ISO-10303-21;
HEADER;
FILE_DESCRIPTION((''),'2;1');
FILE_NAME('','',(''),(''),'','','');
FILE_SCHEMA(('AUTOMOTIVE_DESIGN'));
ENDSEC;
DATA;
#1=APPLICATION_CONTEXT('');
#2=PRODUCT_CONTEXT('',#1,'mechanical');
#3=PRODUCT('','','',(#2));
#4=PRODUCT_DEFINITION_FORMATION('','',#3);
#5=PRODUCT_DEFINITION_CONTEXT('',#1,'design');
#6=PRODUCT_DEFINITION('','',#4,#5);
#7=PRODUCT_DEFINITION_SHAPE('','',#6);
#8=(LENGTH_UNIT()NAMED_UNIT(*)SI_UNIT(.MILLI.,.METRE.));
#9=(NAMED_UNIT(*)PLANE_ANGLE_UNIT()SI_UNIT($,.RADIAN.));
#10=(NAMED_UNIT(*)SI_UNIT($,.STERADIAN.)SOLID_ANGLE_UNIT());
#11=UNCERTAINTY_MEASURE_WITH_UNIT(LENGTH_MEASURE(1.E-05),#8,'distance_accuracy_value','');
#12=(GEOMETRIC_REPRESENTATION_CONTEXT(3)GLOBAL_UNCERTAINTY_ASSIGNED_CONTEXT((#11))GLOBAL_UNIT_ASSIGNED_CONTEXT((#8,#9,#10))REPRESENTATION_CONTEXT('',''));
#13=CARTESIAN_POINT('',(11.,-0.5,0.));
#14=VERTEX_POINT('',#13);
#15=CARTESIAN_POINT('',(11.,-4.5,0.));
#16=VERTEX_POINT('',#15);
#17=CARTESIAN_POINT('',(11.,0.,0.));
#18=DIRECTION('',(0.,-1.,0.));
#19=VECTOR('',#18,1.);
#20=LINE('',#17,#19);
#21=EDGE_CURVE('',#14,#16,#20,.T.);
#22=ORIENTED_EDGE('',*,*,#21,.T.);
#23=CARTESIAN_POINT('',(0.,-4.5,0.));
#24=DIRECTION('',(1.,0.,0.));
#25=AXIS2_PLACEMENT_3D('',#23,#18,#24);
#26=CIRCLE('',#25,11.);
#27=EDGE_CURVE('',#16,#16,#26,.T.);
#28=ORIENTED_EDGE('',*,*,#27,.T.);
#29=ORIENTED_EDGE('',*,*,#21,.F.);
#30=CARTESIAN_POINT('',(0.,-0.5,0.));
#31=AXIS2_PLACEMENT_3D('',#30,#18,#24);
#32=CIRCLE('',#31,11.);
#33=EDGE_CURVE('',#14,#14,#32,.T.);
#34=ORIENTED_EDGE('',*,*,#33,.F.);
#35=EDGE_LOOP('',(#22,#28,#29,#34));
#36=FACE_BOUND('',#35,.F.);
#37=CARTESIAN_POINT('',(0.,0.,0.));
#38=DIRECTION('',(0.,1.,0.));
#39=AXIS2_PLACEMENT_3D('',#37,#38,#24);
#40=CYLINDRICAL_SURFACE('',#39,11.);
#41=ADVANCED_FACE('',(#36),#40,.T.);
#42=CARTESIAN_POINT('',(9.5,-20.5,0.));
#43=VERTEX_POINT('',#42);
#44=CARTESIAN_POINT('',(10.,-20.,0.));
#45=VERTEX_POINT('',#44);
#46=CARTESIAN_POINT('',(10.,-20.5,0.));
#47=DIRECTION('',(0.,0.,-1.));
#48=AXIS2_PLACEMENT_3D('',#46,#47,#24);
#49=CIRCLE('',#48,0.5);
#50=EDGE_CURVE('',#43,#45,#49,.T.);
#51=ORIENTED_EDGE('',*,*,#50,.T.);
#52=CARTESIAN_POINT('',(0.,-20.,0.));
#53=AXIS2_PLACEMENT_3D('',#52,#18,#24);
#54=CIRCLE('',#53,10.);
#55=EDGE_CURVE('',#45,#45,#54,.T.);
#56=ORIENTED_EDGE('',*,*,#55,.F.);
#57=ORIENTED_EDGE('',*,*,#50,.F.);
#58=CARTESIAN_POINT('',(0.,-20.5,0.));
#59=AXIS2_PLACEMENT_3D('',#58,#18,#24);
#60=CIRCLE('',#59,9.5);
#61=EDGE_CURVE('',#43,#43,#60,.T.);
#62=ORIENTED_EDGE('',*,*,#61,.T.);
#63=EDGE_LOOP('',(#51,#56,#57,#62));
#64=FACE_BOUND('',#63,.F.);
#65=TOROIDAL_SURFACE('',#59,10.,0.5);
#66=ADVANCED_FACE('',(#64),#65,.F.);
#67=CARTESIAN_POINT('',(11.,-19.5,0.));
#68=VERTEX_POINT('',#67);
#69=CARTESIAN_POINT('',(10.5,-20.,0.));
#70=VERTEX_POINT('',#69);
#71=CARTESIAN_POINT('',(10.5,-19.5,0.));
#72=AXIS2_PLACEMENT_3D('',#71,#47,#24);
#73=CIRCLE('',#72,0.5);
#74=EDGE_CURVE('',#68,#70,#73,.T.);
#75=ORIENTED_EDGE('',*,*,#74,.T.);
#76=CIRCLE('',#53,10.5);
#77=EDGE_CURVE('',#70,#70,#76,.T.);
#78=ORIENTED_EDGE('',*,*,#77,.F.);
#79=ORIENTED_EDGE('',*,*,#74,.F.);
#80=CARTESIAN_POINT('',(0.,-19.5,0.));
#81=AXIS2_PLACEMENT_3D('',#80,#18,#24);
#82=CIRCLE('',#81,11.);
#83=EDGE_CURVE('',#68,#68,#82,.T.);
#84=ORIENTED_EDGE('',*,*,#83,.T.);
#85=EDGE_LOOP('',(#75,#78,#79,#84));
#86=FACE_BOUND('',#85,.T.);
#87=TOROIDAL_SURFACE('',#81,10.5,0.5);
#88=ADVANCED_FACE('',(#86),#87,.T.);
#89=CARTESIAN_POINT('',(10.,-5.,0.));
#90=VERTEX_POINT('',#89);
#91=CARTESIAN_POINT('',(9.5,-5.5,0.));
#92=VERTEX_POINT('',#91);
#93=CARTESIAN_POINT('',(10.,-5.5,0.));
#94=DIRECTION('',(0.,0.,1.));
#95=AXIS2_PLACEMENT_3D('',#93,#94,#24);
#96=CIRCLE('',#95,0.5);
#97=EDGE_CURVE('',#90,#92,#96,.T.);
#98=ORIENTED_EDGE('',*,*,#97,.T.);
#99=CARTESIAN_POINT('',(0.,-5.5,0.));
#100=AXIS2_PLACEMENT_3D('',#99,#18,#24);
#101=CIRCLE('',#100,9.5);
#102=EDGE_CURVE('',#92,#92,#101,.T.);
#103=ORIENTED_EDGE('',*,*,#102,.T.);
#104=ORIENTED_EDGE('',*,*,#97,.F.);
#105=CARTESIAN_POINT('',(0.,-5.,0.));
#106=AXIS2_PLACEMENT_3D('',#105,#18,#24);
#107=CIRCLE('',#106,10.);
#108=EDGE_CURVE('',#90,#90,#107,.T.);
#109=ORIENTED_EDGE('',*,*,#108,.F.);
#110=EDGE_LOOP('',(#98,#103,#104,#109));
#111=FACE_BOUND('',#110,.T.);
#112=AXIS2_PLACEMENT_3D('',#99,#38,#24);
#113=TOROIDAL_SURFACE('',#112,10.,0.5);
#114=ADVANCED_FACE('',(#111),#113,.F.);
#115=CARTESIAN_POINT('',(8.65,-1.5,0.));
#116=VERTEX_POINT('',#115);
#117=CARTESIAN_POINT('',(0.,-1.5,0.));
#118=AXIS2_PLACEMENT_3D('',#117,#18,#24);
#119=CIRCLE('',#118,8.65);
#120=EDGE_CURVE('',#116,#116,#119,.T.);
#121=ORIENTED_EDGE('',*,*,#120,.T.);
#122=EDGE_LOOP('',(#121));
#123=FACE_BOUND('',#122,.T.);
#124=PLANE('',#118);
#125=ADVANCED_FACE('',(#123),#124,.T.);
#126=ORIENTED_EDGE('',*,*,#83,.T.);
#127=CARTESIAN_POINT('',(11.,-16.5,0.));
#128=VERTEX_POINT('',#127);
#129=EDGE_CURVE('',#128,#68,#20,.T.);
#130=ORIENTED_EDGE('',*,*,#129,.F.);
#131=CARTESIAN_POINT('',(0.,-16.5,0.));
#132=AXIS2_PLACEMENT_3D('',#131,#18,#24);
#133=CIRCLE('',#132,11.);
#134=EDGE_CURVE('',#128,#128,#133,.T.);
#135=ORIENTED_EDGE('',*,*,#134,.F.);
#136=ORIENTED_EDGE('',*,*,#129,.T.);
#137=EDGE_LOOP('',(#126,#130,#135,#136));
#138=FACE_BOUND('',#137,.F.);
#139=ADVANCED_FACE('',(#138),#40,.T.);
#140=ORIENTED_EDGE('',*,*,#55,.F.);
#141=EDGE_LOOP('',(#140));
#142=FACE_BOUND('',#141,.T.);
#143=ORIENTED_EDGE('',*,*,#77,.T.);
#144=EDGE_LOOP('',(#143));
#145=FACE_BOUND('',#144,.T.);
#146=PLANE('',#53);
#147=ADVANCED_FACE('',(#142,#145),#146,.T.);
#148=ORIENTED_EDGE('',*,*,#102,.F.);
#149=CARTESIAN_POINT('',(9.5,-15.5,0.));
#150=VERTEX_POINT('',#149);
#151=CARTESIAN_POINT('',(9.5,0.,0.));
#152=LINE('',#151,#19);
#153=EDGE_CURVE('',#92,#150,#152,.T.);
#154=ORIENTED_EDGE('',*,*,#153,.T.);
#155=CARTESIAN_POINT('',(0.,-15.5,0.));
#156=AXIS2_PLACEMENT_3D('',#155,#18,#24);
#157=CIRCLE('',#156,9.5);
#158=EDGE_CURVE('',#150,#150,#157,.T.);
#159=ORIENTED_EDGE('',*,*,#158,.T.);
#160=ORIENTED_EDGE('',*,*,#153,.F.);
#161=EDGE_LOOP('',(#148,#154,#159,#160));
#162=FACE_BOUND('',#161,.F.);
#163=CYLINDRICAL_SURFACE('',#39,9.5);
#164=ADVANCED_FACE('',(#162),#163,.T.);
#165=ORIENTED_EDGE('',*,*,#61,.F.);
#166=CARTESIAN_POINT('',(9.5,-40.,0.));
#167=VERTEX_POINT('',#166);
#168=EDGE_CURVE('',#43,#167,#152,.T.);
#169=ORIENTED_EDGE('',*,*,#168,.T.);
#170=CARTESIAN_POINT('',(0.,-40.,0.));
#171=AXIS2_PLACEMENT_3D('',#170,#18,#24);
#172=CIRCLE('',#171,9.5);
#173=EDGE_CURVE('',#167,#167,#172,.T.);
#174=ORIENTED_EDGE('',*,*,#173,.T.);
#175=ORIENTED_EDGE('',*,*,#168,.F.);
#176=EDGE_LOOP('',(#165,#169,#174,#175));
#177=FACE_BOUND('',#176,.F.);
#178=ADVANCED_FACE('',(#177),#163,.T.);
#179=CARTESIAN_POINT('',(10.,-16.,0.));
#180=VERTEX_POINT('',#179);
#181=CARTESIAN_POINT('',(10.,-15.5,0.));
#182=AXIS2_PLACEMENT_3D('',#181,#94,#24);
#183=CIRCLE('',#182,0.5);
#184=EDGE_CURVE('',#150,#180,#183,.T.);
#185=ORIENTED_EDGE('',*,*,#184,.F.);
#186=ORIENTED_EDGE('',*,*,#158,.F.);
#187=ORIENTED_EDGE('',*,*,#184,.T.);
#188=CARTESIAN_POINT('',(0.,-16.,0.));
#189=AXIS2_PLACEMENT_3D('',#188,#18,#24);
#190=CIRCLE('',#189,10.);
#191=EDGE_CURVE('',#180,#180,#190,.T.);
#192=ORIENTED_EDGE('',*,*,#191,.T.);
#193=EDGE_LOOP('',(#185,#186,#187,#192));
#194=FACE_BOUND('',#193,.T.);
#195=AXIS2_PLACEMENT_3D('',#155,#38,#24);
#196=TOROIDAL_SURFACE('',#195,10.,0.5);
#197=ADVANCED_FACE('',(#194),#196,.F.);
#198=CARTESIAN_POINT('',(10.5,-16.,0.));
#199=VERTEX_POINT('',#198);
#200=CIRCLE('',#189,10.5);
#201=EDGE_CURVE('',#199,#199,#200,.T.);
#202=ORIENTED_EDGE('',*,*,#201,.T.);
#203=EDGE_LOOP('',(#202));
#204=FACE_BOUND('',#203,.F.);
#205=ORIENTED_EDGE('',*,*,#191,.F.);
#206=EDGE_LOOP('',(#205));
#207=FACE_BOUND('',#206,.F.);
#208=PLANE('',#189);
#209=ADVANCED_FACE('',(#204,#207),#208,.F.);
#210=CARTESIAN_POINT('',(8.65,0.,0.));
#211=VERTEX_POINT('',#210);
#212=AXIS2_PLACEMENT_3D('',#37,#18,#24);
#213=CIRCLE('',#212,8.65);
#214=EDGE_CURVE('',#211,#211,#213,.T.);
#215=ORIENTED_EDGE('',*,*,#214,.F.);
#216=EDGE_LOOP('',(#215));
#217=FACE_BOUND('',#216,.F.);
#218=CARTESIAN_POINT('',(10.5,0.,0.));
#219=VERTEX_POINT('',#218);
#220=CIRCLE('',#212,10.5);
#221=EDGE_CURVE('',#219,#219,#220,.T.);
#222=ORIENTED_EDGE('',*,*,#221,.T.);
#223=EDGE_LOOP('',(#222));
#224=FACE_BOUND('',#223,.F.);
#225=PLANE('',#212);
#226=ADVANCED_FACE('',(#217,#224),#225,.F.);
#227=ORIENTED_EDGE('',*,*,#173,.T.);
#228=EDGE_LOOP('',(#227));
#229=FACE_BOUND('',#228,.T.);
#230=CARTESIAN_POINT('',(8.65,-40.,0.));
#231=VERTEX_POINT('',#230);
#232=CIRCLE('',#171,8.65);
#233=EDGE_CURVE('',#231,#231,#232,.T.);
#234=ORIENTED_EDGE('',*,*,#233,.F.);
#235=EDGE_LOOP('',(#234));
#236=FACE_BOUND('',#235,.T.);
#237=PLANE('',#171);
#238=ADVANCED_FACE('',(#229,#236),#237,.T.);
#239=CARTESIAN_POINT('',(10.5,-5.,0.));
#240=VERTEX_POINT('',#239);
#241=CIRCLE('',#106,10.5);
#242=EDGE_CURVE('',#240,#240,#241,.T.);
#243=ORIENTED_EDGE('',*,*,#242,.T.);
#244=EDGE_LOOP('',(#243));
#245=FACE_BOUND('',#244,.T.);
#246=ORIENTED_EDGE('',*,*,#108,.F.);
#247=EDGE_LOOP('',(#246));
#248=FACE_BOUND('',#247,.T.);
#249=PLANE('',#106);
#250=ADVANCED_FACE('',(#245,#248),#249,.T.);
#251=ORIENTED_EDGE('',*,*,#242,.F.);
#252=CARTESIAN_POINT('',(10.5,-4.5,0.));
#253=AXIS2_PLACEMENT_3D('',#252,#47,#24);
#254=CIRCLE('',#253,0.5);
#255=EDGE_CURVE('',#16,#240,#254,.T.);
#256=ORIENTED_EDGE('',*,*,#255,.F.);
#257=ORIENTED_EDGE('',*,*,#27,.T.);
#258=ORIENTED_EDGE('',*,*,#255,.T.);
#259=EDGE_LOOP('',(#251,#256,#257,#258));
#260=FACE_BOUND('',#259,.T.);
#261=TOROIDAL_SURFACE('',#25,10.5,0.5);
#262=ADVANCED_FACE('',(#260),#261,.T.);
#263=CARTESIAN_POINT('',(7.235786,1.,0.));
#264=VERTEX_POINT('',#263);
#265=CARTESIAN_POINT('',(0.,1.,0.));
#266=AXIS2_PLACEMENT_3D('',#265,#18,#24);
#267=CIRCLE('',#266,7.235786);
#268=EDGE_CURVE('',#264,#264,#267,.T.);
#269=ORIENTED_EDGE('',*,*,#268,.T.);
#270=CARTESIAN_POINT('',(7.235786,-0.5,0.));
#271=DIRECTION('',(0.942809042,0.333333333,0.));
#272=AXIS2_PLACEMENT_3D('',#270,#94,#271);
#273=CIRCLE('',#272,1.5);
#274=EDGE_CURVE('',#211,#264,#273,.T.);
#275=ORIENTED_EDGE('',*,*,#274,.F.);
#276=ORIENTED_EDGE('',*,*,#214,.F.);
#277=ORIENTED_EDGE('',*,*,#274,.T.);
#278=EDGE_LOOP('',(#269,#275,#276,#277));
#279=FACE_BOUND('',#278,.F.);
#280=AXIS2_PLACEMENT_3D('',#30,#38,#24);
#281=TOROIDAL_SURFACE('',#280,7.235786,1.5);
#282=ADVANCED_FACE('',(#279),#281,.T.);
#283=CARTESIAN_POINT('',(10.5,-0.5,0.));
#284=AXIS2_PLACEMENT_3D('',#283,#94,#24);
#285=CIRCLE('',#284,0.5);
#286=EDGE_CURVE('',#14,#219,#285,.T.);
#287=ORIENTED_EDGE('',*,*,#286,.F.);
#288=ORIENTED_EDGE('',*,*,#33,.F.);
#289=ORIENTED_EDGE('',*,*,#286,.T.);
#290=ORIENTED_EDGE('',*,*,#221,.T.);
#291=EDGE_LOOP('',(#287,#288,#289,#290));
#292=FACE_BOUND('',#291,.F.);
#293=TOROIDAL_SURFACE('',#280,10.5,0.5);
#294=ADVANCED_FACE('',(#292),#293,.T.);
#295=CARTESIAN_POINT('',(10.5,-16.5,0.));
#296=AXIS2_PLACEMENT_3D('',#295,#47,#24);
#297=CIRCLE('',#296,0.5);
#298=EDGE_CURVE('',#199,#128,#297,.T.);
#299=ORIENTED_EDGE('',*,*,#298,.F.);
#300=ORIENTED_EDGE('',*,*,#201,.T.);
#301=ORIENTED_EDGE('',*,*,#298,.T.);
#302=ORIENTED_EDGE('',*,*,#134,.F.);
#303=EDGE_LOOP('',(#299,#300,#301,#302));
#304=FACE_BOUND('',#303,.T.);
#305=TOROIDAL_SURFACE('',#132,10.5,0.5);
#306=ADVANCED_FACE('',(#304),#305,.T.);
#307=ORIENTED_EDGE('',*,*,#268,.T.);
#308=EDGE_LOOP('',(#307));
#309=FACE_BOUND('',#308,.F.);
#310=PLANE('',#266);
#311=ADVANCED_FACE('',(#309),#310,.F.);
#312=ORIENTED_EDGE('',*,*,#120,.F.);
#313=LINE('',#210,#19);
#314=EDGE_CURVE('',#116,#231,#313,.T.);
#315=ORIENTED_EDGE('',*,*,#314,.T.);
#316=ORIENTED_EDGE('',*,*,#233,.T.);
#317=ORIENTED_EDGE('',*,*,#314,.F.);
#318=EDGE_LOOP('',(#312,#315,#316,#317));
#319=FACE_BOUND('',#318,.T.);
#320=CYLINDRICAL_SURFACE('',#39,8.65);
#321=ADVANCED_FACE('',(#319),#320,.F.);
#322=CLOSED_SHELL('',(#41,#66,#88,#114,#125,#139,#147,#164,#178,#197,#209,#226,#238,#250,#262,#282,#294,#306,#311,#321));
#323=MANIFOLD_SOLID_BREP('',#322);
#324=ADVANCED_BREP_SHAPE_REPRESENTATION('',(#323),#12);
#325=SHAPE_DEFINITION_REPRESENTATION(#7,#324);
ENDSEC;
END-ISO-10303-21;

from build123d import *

# Parameters (mm, degrees)
F0_R     = 9.5
F0_R_2   = 8.65
F1_DEPTH = 40
F0_R_3   = 11
F2_DEPTH = 20
F3_DEPTH = 16
F4_R     = 11
F4_R_2   = 9.5
F5_DEPTH = 5
F6_R     = 0.5
F4_R_3   = 8.65
F4_R_4   = 8.2
F7_DEPTH = 1.5
F8_DEPTH = 1


# Not quite as in the source:
# - a fillet or chamfer that OpenCascade refuses, or shapes differently, is made with other operations: its cross-section is extruded or revolved along the edge and cut away or added


with BuildPart() as f1:
    # F0 (on Front) → F1 (new body)
    with BuildSketch(Plane.XZ):
        Circle(F0_R)
        Circle(F0_R_2, mode=Mode.SUBTRACT)
    extrude(amount=F1_DEPTH)

    # F0 (on Front) → F2 (join)
    with BuildSketch(Plane.XZ):
        Circle(F0_R_3)
        Circle(F0_R, mode=Mode.SUBTRACT)
    extrude(amount=F2_DEPTH)

    # F0 (on Front) → F3 (cut)
    with BuildSketch(Plane.XZ):
        Circle(F0_R_3)
        Circle(F0_R, mode=Mode.SUBTRACT)
    extrude(amount=F3_DEPTH, mode=Mode.SUBTRACT)

    # F4 (on face) → F5 (join)
    with BuildSketch(Plane.XZ):
        Circle(F4_R)
        Circle(F4_R_2, mode=Mode.SUBTRACT)
    extrude(amount=F5_DEPTH)

    # F6
    f6_edges = [f1.edges().sort_by_distance(p)[0] for p in [
        (-11, 0, 0),
        (-11, -5, 0),
        (-11, -16, 0),
        (-11, -20, 0),
        (-9.5, -5, 0),
        (-9.5, -16, 0),
        (-9.5, -20, 0),
    ]]
    fillet(f6_edges, radius=F6_R)

    # F4 (on face) → F7 (join)
    with BuildSketch(Plane.XZ):
        Circle(F4_R_3)
        Circle(F4_R_4, mode=Mode.SUBTRACT)
        Circle(F4_R_4)
    extrude(amount=F7_DEPTH)

    # F4 (on face) → F8 (join)
    with BuildSketch(Plane.XZ):
        Circle(F4_R_3)
        Circle(F4_R_4, mode=Mode.SUBTRACT)
        Circle(F4_R_4)
    extrude(amount=-F8_DEPTH)

    # F9: fillet of radius 1.5 on 1 edges, made by hand

    # F9_s1 → F9_t2 (revolve, cut)
    with BuildSketch(Plane.XY):
        with BuildLine():
            ThreePointArc((8.65, 0), (8.1018118414, 0.7247448714), (7.2357864376, 1))
            Line((7.2357864376, 1), (8.65, 1))
            Line((8.65, 1), (8.65, 0))
        make_face()
    revolve(axis=Axis((0, 1, 0), (0, -1, 0)), mode=Mode.SUBTRACT)


solid = f1.part
